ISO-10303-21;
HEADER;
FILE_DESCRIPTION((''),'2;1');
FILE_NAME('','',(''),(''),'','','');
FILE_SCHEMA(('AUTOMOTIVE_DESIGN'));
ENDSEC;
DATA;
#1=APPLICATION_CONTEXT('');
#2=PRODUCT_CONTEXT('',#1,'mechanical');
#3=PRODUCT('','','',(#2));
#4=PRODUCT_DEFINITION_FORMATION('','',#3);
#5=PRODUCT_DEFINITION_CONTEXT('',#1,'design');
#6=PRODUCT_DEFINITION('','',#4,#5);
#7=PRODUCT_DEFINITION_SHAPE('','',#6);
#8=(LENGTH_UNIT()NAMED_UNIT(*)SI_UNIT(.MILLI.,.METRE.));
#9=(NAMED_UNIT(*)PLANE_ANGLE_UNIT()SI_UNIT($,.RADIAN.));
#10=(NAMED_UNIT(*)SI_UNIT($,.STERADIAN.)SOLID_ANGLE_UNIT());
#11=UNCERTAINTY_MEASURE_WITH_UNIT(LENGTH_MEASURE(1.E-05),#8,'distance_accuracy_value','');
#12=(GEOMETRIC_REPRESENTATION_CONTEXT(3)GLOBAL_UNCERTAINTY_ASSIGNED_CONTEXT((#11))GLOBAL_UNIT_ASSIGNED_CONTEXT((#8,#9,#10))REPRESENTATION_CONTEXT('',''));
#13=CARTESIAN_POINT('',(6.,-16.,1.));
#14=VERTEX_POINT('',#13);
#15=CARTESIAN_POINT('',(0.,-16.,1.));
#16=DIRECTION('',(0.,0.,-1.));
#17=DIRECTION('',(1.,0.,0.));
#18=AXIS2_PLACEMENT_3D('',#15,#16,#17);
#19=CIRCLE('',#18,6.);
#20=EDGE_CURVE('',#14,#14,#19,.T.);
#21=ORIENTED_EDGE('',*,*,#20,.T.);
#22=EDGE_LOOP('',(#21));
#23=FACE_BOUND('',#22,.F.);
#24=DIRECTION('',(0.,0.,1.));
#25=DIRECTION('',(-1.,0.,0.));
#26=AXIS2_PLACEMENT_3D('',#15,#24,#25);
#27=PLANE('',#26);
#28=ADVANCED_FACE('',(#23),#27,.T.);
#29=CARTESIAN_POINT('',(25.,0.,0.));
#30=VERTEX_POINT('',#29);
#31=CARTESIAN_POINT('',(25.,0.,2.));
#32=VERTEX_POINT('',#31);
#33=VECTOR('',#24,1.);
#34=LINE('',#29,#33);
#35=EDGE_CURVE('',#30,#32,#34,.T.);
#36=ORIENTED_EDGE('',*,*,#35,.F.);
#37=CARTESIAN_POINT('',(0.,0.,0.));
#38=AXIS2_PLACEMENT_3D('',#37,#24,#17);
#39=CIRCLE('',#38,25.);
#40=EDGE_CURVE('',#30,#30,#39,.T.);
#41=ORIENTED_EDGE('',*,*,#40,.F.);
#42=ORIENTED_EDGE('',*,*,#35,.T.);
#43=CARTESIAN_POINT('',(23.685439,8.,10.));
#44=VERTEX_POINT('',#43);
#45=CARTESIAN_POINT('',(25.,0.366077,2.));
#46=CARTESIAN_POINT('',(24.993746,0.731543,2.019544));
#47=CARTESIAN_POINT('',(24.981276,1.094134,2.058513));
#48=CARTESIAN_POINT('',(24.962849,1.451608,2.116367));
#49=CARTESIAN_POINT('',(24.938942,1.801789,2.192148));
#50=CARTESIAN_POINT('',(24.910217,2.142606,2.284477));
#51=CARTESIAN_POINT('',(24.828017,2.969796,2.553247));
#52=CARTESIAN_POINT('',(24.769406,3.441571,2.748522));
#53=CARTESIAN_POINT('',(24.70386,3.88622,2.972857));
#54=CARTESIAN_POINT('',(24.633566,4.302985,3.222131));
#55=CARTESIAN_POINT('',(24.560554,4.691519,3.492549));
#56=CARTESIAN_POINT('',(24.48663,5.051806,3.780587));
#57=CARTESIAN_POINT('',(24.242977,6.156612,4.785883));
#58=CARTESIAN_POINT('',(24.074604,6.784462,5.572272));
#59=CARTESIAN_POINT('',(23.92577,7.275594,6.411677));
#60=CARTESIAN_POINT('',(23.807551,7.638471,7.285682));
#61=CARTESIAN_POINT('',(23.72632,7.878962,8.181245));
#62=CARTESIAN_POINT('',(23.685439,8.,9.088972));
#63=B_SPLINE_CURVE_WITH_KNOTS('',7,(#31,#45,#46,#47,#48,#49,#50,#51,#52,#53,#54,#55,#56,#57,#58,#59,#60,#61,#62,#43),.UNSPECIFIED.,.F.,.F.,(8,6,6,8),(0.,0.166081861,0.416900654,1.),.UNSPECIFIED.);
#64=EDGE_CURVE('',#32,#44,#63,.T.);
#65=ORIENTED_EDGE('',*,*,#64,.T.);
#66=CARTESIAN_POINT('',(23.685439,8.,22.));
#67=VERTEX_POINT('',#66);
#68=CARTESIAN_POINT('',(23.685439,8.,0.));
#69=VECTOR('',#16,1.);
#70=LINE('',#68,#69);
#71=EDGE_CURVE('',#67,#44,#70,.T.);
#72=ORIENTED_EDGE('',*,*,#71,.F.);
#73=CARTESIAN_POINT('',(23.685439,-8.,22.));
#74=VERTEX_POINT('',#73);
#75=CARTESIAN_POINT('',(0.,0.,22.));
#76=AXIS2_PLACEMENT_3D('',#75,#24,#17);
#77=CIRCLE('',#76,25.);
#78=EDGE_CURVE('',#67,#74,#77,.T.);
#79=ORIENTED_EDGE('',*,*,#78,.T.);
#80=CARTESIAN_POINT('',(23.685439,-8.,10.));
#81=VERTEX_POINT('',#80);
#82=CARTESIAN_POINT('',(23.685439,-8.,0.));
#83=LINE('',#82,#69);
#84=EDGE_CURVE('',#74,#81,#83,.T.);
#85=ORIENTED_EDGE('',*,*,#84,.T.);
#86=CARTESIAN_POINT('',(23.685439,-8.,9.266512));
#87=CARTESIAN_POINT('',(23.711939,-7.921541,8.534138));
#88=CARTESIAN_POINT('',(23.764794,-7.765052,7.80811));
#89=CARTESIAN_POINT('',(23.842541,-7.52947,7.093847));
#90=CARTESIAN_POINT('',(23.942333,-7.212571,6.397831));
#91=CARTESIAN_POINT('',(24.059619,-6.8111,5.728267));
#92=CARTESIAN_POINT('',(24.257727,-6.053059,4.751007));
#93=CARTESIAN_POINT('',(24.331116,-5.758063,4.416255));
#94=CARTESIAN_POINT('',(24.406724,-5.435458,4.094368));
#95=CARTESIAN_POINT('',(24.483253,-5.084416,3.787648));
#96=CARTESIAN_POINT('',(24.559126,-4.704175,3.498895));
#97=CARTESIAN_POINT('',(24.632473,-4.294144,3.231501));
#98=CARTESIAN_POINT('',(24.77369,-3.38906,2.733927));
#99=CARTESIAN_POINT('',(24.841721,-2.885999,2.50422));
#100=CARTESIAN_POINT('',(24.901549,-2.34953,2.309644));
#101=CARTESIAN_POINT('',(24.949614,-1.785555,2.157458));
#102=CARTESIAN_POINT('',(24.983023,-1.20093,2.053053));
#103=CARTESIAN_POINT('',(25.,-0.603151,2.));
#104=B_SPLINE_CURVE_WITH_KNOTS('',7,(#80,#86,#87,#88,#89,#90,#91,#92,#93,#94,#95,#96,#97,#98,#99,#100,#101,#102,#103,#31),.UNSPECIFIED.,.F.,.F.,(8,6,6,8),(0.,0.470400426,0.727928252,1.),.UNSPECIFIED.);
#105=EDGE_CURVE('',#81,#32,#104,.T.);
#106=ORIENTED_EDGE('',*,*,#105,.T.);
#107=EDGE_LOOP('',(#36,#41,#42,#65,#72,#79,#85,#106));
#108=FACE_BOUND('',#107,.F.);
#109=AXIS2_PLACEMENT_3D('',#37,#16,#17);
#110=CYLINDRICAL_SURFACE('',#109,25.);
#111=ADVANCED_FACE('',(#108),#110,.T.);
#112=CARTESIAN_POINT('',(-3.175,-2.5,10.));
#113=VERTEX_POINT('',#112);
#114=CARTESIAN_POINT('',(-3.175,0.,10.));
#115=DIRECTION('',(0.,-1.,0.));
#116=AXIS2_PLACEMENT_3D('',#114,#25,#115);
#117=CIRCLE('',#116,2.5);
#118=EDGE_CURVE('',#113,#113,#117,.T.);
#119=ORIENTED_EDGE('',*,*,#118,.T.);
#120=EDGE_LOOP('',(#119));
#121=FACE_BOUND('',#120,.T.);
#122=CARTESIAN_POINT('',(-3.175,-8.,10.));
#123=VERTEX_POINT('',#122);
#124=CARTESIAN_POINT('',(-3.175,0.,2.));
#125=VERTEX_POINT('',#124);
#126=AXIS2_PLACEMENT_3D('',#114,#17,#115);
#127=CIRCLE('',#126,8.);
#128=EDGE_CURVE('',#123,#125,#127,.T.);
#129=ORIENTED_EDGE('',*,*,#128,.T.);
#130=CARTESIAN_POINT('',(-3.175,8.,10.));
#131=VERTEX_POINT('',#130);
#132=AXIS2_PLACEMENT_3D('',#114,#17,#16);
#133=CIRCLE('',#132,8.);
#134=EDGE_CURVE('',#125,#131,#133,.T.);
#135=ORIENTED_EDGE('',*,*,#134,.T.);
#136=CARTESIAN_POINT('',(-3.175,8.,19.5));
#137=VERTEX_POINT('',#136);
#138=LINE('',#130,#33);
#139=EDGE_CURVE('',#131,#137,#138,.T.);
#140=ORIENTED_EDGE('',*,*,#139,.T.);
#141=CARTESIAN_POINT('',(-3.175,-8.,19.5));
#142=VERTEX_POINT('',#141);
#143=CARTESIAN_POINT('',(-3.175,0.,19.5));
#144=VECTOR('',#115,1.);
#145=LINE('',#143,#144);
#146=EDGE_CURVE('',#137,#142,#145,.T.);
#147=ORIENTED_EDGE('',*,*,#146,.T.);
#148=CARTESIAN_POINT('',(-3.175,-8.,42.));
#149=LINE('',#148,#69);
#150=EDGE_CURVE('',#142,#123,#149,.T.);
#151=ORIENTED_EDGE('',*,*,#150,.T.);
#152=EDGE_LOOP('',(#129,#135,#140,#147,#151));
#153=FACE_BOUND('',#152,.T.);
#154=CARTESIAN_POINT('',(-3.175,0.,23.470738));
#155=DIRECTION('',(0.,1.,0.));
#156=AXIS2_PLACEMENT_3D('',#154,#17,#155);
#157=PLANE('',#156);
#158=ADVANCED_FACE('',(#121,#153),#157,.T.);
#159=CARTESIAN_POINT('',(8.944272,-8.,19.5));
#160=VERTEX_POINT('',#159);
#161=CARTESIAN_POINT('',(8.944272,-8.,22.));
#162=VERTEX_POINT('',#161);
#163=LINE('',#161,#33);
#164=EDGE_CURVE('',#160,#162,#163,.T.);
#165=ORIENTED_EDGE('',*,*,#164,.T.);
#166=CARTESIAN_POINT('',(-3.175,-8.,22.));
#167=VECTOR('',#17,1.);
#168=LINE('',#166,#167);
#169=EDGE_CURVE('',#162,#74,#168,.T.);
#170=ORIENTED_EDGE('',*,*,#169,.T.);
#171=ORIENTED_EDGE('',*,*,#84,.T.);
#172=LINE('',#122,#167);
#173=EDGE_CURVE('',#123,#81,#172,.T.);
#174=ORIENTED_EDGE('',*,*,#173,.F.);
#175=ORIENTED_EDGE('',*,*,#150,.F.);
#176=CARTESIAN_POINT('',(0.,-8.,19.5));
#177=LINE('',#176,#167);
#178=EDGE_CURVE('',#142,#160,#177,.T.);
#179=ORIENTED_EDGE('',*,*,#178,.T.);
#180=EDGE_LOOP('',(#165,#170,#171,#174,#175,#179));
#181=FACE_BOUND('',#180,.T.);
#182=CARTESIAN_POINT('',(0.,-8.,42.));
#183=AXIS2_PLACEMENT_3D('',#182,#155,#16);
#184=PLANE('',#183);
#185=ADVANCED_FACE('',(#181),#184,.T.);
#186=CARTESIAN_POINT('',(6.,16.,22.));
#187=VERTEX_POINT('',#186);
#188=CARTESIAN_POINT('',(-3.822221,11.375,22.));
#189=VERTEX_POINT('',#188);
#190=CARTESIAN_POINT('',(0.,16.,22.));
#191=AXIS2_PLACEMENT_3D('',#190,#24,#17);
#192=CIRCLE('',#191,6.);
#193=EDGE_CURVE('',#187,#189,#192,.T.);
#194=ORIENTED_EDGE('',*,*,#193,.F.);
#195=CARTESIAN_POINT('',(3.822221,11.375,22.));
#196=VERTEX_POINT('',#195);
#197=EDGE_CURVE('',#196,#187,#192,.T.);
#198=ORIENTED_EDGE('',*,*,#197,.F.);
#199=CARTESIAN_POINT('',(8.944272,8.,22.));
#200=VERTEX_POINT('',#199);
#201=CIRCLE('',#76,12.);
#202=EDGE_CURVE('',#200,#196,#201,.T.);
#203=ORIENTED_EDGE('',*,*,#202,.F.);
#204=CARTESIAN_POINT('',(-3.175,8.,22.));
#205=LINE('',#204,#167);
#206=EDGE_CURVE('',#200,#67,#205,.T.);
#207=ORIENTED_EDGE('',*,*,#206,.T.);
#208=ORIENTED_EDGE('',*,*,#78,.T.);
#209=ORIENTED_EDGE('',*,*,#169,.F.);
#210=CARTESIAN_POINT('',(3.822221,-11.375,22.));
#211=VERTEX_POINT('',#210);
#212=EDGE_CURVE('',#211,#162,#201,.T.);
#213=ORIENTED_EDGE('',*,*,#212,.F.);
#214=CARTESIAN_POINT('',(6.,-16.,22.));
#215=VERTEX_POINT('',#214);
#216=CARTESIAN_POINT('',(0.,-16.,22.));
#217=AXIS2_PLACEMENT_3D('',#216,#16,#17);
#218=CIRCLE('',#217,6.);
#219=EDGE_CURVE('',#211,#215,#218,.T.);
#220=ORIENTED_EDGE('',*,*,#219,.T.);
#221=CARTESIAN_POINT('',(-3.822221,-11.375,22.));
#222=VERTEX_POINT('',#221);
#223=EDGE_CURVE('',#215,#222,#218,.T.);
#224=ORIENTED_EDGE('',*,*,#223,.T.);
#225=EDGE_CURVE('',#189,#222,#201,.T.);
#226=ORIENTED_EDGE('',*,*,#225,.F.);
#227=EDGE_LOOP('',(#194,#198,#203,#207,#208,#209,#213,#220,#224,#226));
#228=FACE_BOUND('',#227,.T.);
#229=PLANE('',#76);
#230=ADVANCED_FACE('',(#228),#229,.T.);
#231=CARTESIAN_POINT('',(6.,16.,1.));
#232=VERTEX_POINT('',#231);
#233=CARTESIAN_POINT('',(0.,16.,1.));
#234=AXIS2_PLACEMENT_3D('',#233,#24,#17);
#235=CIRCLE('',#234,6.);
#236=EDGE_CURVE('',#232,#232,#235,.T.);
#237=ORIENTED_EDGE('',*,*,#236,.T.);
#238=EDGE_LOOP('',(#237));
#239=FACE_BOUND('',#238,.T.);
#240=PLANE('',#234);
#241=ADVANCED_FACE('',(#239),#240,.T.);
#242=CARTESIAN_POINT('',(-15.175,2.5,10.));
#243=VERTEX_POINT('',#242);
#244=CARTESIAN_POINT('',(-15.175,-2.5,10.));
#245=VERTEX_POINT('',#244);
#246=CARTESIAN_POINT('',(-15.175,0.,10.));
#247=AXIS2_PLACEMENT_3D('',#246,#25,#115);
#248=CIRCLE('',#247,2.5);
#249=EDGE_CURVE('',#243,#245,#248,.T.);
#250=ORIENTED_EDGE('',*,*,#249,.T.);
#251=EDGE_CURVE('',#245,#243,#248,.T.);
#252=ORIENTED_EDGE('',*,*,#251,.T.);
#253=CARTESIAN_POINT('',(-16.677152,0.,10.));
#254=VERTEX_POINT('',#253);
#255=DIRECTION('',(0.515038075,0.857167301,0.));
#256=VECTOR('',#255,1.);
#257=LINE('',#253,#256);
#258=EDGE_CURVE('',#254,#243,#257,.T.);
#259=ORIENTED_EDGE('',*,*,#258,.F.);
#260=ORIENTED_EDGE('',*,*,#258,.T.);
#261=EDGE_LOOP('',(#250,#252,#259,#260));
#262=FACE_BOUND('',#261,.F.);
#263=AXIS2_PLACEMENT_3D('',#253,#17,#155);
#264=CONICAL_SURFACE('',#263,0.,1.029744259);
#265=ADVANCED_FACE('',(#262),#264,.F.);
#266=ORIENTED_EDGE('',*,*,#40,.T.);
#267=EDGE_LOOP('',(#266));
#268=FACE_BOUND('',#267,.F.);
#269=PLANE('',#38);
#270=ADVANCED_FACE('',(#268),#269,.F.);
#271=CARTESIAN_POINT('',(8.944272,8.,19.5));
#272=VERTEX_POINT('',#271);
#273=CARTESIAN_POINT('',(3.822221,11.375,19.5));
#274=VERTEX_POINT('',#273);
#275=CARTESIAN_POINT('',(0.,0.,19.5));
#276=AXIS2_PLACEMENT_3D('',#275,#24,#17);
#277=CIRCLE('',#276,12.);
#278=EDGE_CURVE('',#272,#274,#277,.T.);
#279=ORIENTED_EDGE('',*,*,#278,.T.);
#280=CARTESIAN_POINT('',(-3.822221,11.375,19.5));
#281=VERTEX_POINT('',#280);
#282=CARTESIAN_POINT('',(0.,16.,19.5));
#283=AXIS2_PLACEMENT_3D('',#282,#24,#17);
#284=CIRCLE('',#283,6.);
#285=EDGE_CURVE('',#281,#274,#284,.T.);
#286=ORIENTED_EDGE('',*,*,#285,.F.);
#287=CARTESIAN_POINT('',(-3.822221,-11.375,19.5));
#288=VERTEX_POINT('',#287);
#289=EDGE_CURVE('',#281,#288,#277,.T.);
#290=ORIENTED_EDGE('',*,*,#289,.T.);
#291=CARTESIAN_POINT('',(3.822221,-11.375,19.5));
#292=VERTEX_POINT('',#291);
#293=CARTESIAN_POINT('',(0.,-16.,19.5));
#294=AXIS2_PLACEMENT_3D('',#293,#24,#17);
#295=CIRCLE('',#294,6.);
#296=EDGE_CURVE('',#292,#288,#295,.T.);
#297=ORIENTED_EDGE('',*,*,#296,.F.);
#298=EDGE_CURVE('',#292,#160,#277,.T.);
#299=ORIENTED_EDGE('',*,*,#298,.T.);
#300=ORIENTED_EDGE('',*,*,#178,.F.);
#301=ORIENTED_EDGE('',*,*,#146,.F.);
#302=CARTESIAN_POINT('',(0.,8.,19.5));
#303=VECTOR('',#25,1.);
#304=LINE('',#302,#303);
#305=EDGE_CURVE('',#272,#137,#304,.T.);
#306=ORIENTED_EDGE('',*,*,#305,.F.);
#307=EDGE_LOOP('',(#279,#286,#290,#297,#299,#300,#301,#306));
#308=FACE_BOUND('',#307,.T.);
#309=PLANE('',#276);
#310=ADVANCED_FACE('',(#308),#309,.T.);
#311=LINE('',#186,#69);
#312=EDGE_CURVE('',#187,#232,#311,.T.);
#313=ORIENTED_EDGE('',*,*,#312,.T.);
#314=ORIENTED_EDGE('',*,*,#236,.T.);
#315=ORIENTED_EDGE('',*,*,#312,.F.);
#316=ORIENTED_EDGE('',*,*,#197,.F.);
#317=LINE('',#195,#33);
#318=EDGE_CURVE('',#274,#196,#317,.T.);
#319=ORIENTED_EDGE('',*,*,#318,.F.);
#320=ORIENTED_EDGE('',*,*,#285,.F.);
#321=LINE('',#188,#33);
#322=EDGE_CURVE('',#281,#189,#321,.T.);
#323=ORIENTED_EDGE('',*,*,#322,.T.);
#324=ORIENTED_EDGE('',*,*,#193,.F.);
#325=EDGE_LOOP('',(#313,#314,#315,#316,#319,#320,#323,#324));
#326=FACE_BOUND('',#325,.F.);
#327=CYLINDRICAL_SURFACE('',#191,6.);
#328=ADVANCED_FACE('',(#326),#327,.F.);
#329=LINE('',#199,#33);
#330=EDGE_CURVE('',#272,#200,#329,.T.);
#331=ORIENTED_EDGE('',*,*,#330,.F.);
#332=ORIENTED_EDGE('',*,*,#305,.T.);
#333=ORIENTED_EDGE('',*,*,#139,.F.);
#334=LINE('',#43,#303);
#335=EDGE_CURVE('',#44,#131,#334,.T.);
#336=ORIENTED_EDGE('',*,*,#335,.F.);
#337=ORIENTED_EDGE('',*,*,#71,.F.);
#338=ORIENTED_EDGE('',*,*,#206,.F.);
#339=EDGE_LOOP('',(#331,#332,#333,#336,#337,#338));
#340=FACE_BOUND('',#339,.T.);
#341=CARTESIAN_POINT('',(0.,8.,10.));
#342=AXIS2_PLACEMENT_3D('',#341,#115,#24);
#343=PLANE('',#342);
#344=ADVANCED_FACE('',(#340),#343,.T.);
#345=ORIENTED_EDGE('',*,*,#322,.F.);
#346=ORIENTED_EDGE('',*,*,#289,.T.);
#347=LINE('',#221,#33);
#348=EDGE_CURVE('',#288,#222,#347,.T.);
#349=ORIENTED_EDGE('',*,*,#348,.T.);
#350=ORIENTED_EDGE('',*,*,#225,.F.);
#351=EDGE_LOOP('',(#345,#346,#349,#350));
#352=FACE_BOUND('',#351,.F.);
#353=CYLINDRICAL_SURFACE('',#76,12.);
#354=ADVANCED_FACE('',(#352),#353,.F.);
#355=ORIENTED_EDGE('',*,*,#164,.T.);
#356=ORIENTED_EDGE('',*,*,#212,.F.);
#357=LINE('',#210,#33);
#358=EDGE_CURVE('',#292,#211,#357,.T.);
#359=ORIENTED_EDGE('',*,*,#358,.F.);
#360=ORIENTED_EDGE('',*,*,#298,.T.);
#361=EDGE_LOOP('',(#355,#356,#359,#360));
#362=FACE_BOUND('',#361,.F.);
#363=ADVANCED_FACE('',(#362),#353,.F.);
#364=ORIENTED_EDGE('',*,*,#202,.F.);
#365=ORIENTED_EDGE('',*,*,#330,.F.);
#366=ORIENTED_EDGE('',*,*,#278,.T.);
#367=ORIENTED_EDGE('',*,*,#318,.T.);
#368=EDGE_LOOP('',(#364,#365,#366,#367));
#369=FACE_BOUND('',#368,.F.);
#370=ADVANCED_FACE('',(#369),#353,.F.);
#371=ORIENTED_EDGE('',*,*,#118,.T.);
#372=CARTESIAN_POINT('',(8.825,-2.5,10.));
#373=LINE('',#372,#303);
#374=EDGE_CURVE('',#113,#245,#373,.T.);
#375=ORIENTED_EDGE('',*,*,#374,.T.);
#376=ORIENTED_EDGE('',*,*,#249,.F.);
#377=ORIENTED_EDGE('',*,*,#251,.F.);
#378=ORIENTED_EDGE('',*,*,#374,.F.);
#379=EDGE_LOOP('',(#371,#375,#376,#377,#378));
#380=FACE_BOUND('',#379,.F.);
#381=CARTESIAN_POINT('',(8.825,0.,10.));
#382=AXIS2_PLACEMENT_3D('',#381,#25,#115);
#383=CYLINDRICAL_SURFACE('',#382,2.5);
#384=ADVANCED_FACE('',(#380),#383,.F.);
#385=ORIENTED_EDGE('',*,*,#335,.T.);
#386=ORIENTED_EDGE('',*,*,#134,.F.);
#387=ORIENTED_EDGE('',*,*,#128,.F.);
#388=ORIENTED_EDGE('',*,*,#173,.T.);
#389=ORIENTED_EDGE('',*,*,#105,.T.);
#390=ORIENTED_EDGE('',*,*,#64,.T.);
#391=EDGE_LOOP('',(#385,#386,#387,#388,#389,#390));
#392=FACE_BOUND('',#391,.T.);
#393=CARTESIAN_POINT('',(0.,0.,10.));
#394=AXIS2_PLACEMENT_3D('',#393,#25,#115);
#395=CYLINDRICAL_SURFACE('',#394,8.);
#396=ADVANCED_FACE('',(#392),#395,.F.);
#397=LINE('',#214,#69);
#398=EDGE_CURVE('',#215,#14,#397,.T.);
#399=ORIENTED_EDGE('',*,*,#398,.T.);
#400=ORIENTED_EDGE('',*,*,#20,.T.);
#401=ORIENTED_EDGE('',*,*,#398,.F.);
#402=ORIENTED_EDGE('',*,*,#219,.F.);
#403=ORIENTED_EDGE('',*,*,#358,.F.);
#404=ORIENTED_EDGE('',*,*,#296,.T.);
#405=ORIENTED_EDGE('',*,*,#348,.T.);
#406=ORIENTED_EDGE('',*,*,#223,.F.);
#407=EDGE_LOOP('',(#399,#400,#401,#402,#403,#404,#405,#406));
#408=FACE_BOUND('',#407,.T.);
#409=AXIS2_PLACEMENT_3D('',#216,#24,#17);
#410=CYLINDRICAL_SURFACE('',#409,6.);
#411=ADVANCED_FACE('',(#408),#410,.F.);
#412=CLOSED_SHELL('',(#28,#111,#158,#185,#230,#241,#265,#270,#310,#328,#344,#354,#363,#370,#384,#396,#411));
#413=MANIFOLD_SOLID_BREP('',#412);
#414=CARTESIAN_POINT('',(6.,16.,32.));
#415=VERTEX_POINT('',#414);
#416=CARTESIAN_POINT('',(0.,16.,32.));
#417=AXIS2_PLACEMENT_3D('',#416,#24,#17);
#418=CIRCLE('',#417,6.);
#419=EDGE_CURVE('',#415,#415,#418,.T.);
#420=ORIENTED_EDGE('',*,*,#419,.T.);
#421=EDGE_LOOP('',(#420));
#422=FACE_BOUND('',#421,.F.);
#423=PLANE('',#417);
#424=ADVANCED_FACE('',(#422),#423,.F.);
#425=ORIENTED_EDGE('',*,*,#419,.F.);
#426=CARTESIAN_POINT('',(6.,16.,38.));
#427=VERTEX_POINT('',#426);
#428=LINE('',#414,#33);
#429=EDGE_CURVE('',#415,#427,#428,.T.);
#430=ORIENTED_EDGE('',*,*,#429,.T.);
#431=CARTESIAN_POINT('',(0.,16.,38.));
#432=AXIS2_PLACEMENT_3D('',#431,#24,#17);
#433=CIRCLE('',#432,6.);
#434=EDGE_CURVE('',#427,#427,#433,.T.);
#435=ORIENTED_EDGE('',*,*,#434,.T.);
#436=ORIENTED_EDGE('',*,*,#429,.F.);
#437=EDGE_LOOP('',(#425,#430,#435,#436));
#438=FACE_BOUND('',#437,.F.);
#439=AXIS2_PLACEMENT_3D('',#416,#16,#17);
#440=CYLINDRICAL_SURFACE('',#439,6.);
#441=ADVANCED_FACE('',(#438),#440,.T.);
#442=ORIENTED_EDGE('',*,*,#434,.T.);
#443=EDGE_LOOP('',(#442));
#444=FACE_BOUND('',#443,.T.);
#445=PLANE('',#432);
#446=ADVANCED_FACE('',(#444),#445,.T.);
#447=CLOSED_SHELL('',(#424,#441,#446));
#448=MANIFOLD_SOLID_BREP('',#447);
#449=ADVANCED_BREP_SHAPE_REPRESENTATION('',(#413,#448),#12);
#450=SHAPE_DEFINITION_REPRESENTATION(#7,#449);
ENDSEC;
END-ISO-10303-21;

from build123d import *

# Parameters (mm, degrees)
F0_R          = 25
F1_DEPTH      = 22
F4_DEPTH      = 26.0000001
F4_DEPTH_BACK = 3.175
F5_R          = 6
F6_DEPTH      = 21
F8_D          = 5
F8_DEPTH      = 12
F8_TIP        = 1.5021515476
F9_R          = 12
F10_DEPTH     = 2.5
F12_R         = 6
F13_DEPTH     = 6


# Not quite as in the source:
# - a length typed as a fraction of an inch, garbled in the dataset ("3 / 203.2 mm" for 3/8 in), is restored
# - a pattern or mirror of a feature is missing from the dataset's text; its kind, count and spacing are read off the source's solid


with BuildPart() as f1:
    # F0 (on Top) → F1 (new body)
    with BuildSketch(Plane.XY):
        Circle(F0_R)
    extrude(amount=F1_DEPTH)

    # F3 (on Right) → F4 (cut, two sides)
    with BuildSketch(Plane.YZ) as f4_sk:
        with BuildLine():
            Line((8, 10), (8, 42))
            Line((8, 42), (-8, 42))
            Line((-8, 42), (-8, 10))
            ThreePointArc((-8, 10), (-5.6568542495, 4.3431457505), (0, 2))
            ThreePointArc((0, 2), (5.6568542495, 4.3431457505), (8, 10))
        make_face()
    extrude(amount=F4_DEPTH, mode=Mode.SUBTRACT)
    extrude(f4_sk.sketch, amount=-F4_DEPTH_BACK, mode=Mode.SUBTRACT)

    # F5 (on face) → F6 (cut)
    with BuildSketch(Plane.XY.offset(22)):
        with Locations((0, 16)):
            Circle(F5_R)
    f6 = extrude(amount=-F6_DEPTH, mode=Mode.SUBTRACT)

    # F6_copies: F6 across plane
    add(f6.mirror(Plane(origin=(0, 0, 0), x_dir=(0, 0, -1), z_dir=(0, -1, 0))), mode=Mode.SUBTRACT)

    # F8
    with Locations(Plane.YZ.offset(-3.175)):
        with Locations((0, 10)):
            Hole(F8_D / 2, depth=F8_DEPTH)
            with Locations((0, 0, -(F8_DEPTH + F8_TIP / 2))):  # 118° drill point
                Cone(0, F8_D / 2, F8_TIP, mode=Mode.SUBTRACT)

    # F9 (on face) → F10 (cut)
    with BuildSketch(Plane.XY.offset(22)):
        Circle(F9_R)
    extrude(amount=-F10_DEPTH, mode=Mode.SUBTRACT)


with BuildPart() as f13:
    # F12 (on offset) → F13 (new body)
    with BuildSketch(Plane.XY.offset(32)):
        with Locations((0, 16)):
            Circle(F12_R)
    extrude(amount=F13_DEPTH)


solid = Compound([f1.part, f13.part])
